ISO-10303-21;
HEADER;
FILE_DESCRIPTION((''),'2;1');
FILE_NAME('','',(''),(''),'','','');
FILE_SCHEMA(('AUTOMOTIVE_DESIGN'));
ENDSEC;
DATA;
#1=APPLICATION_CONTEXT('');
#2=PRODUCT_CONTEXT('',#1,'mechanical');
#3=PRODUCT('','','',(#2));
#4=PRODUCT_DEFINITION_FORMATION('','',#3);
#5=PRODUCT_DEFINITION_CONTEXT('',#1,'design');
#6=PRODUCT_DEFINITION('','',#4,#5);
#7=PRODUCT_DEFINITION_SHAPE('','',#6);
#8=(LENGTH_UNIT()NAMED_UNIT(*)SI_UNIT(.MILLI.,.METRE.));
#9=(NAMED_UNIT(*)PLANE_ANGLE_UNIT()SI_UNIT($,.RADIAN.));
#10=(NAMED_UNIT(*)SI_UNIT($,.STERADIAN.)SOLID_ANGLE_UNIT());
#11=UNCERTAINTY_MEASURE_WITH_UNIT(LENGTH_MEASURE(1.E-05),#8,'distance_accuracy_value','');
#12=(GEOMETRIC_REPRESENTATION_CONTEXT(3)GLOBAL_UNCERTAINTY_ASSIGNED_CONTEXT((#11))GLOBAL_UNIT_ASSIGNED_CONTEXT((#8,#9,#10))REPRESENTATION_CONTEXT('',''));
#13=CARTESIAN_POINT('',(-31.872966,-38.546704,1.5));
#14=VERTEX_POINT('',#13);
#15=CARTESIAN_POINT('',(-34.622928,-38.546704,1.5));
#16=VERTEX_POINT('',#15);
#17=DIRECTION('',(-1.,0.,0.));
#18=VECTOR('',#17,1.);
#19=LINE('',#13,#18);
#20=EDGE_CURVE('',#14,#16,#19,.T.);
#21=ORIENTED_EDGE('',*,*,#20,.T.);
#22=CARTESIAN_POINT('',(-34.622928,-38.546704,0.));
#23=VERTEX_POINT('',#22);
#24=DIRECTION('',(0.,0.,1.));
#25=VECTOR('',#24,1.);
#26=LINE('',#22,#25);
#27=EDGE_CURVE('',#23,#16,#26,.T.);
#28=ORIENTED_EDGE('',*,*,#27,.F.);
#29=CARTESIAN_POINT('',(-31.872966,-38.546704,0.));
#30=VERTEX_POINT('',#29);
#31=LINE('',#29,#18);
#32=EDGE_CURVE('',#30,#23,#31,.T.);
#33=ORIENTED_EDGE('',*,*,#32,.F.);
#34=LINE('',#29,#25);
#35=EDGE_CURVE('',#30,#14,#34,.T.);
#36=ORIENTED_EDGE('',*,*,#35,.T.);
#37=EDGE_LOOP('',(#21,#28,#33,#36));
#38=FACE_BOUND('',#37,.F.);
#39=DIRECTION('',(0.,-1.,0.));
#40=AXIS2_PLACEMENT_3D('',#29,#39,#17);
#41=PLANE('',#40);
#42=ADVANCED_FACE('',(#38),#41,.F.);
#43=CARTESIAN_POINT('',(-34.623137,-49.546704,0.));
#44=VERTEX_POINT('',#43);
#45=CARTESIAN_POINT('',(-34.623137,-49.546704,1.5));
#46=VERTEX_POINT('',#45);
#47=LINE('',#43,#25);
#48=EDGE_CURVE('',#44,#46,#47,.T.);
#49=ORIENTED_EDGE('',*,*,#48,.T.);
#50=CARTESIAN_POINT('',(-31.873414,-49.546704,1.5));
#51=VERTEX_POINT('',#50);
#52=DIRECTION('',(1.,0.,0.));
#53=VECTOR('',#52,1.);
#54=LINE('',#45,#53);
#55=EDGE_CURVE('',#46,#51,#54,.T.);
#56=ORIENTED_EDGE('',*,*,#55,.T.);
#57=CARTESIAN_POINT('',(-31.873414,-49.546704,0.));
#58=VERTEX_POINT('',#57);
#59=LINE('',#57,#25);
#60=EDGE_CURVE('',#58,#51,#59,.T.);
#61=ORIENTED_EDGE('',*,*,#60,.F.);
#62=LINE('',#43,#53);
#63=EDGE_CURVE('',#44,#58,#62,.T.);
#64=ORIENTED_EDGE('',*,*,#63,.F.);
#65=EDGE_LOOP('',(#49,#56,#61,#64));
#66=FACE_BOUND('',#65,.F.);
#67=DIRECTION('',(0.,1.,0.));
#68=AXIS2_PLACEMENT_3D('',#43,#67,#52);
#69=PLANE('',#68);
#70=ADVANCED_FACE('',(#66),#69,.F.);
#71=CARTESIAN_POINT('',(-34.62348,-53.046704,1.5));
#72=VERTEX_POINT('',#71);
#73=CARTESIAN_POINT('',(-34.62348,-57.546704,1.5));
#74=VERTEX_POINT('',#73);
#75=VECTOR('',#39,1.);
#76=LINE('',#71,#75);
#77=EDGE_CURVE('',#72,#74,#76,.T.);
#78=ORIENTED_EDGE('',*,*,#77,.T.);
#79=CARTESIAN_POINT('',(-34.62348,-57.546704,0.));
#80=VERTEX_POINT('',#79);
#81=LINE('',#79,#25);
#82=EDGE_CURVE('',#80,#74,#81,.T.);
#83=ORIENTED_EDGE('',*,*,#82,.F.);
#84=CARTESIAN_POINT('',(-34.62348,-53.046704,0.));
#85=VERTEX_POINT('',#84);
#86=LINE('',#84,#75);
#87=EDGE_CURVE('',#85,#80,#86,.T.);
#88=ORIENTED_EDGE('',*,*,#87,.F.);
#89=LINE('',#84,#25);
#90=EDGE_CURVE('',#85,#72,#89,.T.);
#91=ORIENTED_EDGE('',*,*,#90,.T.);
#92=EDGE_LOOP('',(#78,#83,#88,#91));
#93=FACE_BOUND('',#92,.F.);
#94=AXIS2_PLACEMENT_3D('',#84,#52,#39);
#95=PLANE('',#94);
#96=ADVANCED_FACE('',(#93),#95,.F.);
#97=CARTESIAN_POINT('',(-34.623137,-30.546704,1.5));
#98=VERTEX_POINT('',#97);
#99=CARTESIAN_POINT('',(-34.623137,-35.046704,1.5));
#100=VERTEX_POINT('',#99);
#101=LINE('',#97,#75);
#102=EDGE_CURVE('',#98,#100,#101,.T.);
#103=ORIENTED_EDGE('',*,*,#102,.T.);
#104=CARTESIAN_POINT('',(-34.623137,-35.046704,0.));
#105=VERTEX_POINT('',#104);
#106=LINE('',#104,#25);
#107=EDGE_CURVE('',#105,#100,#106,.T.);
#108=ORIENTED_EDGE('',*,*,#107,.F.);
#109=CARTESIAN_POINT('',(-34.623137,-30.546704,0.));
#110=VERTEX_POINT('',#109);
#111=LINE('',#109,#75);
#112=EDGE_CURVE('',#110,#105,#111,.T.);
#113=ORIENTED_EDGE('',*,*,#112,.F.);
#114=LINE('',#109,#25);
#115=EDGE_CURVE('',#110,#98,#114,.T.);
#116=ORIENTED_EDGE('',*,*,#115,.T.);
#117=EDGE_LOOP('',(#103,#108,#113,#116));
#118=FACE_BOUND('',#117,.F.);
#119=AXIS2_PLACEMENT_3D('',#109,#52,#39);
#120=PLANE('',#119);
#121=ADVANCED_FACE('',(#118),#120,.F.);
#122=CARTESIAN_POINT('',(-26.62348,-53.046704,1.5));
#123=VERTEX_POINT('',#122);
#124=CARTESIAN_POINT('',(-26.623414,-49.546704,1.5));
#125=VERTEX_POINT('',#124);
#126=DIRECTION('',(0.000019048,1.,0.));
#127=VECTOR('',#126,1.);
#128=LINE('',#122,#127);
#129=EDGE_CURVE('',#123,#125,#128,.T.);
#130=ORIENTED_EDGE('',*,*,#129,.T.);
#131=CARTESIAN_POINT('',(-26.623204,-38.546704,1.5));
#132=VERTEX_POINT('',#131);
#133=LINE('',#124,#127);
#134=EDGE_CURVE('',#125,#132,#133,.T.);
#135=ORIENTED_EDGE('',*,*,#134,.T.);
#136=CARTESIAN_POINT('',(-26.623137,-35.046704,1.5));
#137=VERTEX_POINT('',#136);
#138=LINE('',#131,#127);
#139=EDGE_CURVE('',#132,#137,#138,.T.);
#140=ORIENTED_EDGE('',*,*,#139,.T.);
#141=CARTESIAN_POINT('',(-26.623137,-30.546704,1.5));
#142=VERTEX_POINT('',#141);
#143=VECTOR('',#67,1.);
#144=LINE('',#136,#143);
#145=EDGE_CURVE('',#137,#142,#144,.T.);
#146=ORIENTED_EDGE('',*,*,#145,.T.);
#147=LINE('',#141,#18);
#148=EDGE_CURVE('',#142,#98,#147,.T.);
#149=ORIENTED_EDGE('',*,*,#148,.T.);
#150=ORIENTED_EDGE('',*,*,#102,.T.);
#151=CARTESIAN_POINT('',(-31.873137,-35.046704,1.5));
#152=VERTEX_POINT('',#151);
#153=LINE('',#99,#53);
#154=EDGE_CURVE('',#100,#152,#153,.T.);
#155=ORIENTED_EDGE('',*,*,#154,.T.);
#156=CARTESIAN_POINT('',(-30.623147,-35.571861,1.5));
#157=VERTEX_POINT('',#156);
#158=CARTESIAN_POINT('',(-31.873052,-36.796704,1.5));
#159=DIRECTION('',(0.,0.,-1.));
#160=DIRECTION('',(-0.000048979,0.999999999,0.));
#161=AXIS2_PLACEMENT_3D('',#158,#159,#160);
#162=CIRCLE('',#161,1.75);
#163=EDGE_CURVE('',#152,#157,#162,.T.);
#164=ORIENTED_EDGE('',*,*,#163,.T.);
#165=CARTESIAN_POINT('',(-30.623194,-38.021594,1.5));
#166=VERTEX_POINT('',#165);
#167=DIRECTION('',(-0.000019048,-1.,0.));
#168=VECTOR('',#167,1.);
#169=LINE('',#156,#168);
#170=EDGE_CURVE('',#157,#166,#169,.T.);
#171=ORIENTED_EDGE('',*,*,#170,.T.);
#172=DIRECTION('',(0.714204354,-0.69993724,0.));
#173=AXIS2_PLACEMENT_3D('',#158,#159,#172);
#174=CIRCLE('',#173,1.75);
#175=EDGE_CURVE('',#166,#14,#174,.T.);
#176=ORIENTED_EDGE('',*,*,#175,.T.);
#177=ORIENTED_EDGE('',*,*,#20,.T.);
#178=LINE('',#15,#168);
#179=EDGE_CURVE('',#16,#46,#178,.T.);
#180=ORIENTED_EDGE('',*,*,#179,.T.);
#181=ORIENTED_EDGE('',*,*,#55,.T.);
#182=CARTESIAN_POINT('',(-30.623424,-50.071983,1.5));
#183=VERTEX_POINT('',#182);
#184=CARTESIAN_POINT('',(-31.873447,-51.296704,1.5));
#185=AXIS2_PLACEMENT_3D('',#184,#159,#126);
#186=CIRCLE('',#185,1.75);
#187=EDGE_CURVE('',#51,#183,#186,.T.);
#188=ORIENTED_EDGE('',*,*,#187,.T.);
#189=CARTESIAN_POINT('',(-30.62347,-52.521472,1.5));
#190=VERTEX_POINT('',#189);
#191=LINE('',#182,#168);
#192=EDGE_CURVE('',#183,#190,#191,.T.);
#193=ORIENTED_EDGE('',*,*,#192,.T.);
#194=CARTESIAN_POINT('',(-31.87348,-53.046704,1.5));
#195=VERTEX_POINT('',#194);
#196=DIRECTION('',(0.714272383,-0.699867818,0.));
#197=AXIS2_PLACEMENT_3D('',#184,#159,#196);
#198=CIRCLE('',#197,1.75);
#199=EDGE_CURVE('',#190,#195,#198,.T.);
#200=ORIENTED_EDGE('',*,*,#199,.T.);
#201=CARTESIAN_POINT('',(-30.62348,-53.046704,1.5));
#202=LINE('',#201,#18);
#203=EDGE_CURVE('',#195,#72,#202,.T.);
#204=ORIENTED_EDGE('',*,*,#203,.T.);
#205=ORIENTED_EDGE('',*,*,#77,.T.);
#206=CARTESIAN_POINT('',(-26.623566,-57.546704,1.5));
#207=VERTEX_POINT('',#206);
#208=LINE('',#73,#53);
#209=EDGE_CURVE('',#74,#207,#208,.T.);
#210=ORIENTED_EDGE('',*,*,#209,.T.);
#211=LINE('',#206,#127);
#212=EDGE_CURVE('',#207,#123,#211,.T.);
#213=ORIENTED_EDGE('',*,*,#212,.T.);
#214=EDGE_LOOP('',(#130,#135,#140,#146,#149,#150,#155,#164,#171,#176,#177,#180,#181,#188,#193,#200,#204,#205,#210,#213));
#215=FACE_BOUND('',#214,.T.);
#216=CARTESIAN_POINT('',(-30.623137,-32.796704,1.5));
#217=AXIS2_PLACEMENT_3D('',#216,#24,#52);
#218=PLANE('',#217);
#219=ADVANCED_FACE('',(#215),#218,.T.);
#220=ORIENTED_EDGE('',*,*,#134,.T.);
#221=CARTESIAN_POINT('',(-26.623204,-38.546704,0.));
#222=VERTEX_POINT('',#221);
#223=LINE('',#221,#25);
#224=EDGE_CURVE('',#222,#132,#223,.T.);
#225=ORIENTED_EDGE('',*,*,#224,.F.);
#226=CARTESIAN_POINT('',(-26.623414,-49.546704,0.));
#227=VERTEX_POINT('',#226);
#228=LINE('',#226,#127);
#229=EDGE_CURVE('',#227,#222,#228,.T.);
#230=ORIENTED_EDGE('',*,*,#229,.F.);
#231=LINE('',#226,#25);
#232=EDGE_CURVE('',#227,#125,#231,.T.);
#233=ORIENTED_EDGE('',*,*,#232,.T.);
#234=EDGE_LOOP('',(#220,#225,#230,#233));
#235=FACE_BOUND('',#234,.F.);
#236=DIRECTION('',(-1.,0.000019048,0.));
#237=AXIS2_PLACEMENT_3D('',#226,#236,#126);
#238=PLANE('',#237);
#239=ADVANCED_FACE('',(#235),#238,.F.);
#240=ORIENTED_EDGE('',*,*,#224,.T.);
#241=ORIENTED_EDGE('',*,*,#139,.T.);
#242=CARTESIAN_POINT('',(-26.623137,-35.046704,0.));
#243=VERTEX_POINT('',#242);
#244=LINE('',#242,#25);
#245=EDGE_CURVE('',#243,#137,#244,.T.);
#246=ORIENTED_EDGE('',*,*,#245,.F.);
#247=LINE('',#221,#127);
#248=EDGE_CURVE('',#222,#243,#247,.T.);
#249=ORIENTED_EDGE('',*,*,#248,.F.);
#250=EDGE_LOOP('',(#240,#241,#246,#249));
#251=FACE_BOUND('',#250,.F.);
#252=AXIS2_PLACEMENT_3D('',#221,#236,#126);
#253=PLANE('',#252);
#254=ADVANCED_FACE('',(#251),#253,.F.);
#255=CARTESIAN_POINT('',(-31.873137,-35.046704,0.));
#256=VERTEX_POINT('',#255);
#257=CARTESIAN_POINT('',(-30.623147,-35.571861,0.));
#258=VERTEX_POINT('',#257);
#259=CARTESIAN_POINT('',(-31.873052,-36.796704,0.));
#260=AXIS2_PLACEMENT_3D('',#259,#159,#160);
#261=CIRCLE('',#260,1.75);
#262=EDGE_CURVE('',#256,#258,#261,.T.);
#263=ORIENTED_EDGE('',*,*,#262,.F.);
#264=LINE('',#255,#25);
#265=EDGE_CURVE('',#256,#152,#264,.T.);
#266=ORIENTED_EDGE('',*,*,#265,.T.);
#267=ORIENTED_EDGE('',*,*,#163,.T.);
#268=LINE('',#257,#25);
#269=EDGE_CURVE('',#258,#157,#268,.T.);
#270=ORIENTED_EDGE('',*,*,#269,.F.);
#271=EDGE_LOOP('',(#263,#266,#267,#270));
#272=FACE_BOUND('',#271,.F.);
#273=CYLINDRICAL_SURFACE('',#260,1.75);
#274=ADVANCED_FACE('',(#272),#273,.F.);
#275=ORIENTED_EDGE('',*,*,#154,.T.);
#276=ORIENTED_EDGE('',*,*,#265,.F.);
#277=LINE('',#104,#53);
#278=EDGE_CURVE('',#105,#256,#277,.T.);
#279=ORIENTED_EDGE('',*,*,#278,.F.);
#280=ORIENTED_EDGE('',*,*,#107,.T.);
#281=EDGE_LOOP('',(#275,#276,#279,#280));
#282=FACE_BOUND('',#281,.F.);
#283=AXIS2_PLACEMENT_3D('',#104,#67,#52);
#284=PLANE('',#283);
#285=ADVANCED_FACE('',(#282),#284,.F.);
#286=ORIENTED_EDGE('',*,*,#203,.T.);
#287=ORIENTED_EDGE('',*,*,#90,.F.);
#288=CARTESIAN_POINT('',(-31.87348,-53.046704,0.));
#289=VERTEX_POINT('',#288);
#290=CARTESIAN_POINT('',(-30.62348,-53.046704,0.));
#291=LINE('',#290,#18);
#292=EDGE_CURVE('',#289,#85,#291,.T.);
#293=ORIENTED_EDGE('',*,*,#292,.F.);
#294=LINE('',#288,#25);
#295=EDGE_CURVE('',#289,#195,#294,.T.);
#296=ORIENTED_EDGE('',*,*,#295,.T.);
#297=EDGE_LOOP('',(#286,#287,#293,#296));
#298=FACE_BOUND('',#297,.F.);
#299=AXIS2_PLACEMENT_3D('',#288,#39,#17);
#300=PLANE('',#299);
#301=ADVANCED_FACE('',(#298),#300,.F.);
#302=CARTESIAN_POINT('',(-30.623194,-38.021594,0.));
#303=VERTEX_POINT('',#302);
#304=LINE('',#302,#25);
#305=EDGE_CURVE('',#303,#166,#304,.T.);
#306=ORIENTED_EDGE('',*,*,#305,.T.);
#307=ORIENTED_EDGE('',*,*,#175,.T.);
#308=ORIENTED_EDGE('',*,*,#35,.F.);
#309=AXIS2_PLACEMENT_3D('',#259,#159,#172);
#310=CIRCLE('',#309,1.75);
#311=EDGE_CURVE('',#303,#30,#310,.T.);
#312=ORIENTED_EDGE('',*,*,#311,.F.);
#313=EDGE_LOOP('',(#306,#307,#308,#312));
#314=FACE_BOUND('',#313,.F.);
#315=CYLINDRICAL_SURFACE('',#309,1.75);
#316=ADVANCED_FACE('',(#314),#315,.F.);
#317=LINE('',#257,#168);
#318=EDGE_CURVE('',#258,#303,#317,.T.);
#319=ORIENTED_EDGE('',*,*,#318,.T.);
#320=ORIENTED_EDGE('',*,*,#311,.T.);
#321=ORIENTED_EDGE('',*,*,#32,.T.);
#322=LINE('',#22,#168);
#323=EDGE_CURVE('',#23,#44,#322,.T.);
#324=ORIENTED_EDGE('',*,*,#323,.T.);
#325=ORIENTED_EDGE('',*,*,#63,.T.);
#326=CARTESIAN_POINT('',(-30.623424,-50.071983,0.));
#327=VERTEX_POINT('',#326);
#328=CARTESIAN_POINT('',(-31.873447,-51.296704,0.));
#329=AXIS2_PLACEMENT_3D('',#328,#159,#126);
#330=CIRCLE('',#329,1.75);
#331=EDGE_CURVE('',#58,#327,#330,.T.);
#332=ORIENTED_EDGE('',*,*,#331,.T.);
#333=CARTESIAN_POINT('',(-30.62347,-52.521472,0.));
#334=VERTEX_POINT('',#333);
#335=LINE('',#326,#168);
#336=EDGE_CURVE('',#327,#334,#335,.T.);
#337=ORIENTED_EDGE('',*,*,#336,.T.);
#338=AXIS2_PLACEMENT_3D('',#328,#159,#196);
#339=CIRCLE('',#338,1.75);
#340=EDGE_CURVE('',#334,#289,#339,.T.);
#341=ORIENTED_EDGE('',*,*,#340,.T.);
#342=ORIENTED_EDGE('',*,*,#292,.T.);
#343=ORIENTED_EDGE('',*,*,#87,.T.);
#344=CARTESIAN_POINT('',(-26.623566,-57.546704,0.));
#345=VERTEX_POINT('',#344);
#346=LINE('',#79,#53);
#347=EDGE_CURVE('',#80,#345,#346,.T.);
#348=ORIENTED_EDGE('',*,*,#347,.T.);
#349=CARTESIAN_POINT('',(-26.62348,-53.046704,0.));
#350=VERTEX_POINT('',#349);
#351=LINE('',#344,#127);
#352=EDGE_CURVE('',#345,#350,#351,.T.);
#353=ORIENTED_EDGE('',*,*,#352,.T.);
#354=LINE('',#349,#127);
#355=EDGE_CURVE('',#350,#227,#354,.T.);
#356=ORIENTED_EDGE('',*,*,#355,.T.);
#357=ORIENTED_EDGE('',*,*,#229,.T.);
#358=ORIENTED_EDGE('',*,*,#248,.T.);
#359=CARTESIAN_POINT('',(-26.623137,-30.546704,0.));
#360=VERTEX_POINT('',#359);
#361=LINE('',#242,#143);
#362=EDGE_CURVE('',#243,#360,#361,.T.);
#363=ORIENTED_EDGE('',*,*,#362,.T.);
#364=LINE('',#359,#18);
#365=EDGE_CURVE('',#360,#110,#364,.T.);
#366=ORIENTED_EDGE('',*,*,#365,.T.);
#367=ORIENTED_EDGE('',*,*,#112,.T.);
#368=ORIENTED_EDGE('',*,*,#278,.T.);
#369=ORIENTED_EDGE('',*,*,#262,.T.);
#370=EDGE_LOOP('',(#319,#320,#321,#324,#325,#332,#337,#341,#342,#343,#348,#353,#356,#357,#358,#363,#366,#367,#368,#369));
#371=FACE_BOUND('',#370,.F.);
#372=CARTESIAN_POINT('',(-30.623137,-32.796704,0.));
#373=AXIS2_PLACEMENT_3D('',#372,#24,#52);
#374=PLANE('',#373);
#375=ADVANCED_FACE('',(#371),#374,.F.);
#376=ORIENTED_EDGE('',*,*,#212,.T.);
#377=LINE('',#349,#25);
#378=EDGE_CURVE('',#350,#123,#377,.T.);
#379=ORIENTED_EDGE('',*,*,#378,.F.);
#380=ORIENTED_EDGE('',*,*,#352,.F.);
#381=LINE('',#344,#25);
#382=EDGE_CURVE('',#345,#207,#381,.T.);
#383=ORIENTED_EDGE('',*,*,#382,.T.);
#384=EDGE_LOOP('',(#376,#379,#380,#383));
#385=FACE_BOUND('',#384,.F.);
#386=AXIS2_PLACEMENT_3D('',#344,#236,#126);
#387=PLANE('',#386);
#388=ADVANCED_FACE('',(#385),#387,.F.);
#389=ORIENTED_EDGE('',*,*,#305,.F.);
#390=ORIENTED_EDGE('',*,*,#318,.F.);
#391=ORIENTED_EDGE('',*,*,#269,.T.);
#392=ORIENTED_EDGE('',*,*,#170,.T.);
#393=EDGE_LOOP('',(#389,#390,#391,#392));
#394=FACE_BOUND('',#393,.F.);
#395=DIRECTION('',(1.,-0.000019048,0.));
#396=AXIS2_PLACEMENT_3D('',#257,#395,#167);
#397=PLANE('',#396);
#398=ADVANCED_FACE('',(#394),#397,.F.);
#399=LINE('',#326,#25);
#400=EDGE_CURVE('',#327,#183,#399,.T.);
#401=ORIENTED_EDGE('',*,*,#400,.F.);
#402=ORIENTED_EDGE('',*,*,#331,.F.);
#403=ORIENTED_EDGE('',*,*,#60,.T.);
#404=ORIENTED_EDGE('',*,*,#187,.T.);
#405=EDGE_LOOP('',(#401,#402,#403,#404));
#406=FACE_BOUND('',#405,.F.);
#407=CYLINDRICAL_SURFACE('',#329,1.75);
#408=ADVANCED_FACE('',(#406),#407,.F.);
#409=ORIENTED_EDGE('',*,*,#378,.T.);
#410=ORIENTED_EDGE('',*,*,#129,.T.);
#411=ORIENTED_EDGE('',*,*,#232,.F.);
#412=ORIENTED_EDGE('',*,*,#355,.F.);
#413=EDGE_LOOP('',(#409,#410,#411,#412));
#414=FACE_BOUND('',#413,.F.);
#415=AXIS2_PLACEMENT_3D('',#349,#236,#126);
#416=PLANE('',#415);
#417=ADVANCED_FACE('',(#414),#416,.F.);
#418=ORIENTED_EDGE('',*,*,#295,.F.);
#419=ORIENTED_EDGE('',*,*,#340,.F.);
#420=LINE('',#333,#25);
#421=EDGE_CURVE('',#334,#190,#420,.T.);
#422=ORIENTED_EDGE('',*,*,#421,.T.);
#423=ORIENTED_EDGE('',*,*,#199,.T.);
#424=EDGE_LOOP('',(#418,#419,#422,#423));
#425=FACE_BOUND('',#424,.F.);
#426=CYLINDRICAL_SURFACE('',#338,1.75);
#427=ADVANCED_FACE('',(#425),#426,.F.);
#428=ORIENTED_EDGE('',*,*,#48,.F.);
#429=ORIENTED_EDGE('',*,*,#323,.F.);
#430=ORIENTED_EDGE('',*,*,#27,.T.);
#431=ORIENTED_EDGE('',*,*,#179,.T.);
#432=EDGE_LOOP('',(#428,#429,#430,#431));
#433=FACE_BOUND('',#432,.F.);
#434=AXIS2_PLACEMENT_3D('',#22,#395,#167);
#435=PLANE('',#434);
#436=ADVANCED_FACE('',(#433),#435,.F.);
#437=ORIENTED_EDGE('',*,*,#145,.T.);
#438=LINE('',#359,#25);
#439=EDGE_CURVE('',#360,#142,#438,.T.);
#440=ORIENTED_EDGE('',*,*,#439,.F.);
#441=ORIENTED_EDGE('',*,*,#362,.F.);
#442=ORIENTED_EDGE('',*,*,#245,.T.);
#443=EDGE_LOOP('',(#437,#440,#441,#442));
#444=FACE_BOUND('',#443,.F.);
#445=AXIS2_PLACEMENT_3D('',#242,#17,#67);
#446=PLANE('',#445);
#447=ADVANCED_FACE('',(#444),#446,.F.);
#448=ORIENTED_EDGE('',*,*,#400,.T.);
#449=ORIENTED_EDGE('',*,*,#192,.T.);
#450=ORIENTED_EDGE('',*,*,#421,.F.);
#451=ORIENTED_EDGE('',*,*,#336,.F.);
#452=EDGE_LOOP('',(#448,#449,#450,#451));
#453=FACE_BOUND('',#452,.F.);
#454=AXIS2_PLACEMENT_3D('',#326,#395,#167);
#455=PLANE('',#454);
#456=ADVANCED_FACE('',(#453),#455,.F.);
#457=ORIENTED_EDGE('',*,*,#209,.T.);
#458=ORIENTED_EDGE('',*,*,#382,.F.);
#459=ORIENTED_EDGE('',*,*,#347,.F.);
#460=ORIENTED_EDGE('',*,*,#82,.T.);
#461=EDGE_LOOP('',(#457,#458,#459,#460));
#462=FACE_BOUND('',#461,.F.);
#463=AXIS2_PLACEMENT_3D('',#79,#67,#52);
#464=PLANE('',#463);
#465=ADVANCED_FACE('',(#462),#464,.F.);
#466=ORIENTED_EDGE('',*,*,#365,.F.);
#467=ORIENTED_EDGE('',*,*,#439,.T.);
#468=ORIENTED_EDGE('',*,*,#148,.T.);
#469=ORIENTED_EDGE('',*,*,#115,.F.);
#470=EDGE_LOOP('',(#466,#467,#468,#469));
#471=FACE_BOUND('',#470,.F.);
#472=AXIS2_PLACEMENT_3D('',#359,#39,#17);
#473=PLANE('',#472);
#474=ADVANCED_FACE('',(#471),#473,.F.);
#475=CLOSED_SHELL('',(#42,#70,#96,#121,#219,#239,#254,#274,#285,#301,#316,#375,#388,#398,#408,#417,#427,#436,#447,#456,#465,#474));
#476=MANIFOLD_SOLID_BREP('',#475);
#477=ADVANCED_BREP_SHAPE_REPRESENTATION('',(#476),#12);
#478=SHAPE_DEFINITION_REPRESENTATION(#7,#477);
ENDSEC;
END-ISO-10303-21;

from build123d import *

# Parameters (mm, degrees)
F1_DEPTH = 1.5


# Not quite as in the source:
# - ends of sketch curves that miss each other by under 0.0002 mm in the source are joined


with BuildPart() as f1:
    # F0 (on Top) → F1 (new body)
    with BuildSketch(Plane.XY):
        Polygon((-34.6231374532, -30.5467036664), (-34.6231374532, -35.0467036664), (-31.8731374532, -35.0467036664), (-30.6230945961, -35.0467036664), (-26.6231374532, -35.0467036664), (-26.6231374532, -30.5467036664), (-30.6230517389, -30.5467036664), align=None)
        with BuildLine():
            Line((-30.6230945961, -35.0467036664), (-31.8731374532, -35.0467036664))
            ThreePointArc((-31.8731374532, -35.0467036664), (-31.1952175422, -35.1833094776), (-30.6231474562, -35.5718611088))
            Line((-30.6231474562, -35.5718611088), (-30.6230945961, -35.0467036664))
        make_face()
        with BuildLine():
            Line((-26.6231374532, -35.0467036664), (-30.6230945961, -35.0467036664))
            Line((-30.6230945961, -35.0467036664), (-30.6231474562, -35.5718611088))
            ThreePointArc((-30.6231474562, -35.5718611088), (-30.1230517371, -36.796737), (-30.6231941178, -38.0215938389))
            Line((-30.6231941178, -38.0215938389), (-30.6232041199, -38.5467036666))
            Line((-30.6232041199, -38.5467036666), (-26.6232041199, -38.5467036666))
            Line((-26.6232041199, -38.5467036666), (-26.6231374532, -35.0467036664))
        make_face()
        with BuildLine():
            ThreePointArc((-30.6231941178, -38.0215938389), (-30.1230517371, -36.796737), (-30.6231474562, -35.5718611088))
            Line((-30.6231474562, -35.5718611088), (-30.6231941178, -38.0215938389))
        make_face()
        with BuildLine():
            Line((-30.6232041199, -38.5467036666), (-30.6231941178, -38.0215938389))
            ThreePointArc((-30.6231941178, -38.0215938389), (-31.1951692504, -38.410077566), (-31.8729660246, -38.5467036666))
            Line((-31.8729660246, -38.5467036666), (-30.6232041199, -38.5467036666))
        make_face()
        Polygon((-26.6234136437, -49.5467036666), (-26.6232041199, -38.5467036666), (-30.6232041199, -38.5467036666), (-30.6234136437, -49.5467036665), align=None)
        Polygon((-30.6234136437, -49.5467036665), (-30.6232041199, -38.5467036666), (-31.8729660246, -38.5467036666), (-34.6229279294, -38.5467036666), (-34.6231374532, -49.5467036664), (-31.8734136439, -49.5467036665), align=None)
        with BuildLine():
            Line((-26.6234803104, -53.0467036664), (-26.6234136437, -49.5467036666))
            Line((-26.6234136437, -49.5467036666), (-30.6234136437, -49.5467036665))
            Line((-30.6234136437, -49.5467036665), (-30.623423649, -50.0719826043))
            ThreePointArc((-30.623423649, -50.0719826043), (-30.1234469771, -51.2967369998), (-30.6234703059, -52.5214723478))
            Line((-30.6234703059, -52.5214723478), (-30.6234803104, -53.0467036664))
            Line((-30.6234803104, -53.0467036664), (-26.6234803104, -53.0467036664))
        make_face()
        with BuildLine():
            Line((-30.623423649, -50.0719826043), (-30.6234136437, -49.5467036665))
            Line((-30.6234136437, -49.5467036665), (-31.8734136439, -49.5467036665))
            ThreePointArc((-31.8734136439, -49.5467036665), (-31.1954794965, -49.6833654824), (-30.623423649, -50.0719826043))
        make_face()
        Polygon((-26.6235660246, -57.5467036664), (-26.6234803104, -53.0467036664), (-30.6234803104, -53.0467036664), (-31.8734803104, -53.0467036664), (-34.6234803104, -53.0467036664), (-34.6234803104, -57.5467036664), align=None)
        with BuildLine():
            ThreePointArc((-30.6234703059, -52.5214723478), (-30.1234469771, -51.2967369998), (-30.623423649, -50.0719826043))
            Line((-30.623423649, -50.0719826043), (-30.6234703059, -52.5214723478))
        make_face()
        with BuildLine():
            Line((-31.8734803104, -53.0467036664), (-30.6234803104, -53.0467036664))
            Line((-30.6234803104, -53.0467036664), (-30.6234703059, -52.5214723478))
            ThreePointArc((-30.6234703059, -52.5214723478), (-31.1955409574, -52.9100676767), (-31.8734803104, -53.0467036665))
        make_face()
    extrude(amount=F1_DEPTH)


solid = f1.part
